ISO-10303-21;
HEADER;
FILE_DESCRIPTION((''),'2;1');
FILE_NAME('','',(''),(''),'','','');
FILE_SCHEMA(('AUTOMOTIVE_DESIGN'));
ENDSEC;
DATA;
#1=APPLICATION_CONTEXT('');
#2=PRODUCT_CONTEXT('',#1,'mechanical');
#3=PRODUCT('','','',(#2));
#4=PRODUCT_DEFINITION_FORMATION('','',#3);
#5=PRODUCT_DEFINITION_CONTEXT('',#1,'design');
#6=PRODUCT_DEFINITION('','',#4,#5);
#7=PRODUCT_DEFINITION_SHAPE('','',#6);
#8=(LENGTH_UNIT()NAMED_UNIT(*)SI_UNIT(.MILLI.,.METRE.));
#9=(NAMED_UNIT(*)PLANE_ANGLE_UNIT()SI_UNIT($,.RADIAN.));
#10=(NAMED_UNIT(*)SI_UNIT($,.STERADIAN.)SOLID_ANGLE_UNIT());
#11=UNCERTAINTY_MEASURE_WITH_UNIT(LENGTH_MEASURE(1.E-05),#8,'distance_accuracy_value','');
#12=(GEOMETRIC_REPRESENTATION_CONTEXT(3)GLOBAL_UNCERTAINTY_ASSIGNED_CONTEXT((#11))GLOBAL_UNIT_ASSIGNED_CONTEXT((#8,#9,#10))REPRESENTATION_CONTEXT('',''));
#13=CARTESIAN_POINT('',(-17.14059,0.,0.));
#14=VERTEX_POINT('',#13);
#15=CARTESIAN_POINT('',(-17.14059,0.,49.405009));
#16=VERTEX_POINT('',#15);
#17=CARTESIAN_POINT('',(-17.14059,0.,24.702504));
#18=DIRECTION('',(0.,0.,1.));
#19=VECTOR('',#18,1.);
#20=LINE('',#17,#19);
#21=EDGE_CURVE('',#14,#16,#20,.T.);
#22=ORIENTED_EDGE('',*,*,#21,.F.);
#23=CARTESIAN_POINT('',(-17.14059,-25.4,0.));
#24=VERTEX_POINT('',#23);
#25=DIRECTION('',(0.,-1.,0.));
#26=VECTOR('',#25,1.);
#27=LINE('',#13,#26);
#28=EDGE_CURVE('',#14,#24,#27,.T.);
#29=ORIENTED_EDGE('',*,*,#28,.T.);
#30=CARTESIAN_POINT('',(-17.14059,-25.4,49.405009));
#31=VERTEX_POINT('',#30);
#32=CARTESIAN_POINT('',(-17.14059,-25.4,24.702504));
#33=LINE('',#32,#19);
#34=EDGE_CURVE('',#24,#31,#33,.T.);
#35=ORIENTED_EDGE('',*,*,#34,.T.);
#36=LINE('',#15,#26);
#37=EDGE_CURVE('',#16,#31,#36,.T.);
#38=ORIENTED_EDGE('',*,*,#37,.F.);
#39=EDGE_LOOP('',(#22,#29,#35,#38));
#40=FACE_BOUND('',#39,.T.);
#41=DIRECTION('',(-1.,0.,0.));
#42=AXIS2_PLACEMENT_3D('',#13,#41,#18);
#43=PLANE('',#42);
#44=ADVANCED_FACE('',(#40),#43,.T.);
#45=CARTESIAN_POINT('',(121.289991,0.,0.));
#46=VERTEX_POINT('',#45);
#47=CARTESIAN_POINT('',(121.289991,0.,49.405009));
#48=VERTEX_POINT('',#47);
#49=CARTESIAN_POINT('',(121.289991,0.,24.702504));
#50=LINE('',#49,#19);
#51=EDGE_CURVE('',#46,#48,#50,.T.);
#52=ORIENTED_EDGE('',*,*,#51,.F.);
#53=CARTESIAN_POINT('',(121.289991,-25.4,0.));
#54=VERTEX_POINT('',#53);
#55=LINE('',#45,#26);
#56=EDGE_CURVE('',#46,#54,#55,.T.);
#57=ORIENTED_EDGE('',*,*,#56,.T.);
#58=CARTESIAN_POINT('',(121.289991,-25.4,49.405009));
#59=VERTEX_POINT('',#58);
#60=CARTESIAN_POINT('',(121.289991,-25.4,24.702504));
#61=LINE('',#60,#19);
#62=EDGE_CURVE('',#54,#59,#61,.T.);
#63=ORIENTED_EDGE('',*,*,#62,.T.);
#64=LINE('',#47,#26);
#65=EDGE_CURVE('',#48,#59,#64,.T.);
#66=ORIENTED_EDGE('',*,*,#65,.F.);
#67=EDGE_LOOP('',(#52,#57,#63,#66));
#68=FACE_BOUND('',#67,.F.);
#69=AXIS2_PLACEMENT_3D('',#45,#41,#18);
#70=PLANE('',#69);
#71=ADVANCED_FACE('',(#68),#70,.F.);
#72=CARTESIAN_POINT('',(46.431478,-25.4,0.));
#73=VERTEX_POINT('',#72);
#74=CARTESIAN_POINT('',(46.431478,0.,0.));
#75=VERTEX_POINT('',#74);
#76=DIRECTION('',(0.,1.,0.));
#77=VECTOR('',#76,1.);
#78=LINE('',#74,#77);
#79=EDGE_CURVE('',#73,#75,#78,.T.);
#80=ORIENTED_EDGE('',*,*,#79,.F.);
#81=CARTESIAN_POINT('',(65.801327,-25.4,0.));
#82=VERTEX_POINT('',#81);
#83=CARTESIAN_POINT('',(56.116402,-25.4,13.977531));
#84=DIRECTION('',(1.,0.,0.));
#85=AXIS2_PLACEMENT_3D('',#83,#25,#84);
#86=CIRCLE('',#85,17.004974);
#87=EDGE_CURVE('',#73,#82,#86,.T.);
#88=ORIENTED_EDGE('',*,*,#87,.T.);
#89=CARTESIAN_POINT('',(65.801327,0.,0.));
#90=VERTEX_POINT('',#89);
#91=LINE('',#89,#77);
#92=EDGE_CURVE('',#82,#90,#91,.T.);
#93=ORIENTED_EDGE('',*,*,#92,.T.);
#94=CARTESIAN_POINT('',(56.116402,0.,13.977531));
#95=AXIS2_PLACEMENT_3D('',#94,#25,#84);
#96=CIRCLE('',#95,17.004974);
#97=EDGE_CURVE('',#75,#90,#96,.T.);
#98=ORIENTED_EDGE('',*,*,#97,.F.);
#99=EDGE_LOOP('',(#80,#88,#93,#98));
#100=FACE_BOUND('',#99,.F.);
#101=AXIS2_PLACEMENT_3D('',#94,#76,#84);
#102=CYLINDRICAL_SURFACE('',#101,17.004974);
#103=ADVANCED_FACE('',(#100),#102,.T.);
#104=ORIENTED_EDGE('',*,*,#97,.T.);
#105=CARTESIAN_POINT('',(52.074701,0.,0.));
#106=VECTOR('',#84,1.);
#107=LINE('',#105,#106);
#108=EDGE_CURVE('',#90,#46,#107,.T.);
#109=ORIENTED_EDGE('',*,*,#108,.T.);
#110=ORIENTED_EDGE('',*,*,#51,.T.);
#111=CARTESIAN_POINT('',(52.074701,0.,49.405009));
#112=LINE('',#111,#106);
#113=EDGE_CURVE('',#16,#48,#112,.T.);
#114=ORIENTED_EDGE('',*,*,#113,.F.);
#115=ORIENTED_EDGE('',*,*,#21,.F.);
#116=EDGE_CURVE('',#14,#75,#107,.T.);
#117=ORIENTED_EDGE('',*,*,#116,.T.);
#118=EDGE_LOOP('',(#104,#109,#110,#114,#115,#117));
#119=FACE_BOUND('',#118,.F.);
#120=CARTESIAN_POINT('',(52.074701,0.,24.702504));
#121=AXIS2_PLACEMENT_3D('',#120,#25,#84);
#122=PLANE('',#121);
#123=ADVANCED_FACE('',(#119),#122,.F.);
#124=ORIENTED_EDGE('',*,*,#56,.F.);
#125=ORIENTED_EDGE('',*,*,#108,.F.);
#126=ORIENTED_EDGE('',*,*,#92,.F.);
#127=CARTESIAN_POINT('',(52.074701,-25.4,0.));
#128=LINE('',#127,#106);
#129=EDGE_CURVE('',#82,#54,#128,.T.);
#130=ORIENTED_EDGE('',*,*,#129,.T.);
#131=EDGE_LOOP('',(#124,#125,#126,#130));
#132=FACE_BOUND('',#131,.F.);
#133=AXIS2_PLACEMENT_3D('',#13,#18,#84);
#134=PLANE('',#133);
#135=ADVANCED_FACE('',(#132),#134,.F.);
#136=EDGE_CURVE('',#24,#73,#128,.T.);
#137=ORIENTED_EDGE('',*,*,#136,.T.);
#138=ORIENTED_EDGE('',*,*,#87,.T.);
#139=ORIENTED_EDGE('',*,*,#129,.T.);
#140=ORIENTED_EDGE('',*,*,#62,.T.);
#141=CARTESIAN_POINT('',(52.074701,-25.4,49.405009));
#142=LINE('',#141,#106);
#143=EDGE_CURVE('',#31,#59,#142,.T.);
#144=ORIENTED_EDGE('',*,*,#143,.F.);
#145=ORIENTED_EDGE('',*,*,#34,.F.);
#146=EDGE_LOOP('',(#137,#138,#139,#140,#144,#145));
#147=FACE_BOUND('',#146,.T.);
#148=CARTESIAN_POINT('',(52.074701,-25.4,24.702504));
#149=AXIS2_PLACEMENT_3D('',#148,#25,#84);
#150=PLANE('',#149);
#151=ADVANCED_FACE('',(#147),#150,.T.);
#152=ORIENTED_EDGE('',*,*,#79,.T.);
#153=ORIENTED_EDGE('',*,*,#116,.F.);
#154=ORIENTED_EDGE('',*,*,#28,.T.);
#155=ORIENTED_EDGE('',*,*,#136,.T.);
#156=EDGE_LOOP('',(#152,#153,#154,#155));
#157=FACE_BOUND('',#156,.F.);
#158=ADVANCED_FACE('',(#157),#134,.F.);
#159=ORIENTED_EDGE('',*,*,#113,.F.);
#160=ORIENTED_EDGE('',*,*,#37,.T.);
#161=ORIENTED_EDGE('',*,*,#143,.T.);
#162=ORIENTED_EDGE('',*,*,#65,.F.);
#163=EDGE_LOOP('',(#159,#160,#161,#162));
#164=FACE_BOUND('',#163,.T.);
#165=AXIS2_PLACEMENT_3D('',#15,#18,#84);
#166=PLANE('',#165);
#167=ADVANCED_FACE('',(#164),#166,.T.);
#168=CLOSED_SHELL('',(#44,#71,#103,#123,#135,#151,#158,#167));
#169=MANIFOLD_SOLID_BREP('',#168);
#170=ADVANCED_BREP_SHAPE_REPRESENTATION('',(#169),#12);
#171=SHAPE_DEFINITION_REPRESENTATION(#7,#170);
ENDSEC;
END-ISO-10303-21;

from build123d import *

# Parameters (mm, degrees)
F0_W     = 138.4305804968
F0_H     = 49.4050085545
F1_DEPTH = 25.4
F2_R     = 17.004974152
F3_DEPTH = 25.4


# Not quite as in the source:
# - the program builds the solid bodies; features that only make, move or delete a surface that nothing else refers to are left out


with BuildPart() as f1:
    # F0 (on Front) → F1 (new body)
    with BuildSketch(Plane.XZ):
        with Locations((52.0747005939, 24.7025042772)):
            Rectangle(F0_W, F0_H)
    extrude(amount=F1_DEPTH)

    # F2 (on Front) → F3 (join)
    with BuildSketch(Plane.XZ):
        with Locations((56.1164021492, 13.9775313437)):
            Circle(F2_R)
    extrude(amount=F3_DEPTH)


solid = f1.part
